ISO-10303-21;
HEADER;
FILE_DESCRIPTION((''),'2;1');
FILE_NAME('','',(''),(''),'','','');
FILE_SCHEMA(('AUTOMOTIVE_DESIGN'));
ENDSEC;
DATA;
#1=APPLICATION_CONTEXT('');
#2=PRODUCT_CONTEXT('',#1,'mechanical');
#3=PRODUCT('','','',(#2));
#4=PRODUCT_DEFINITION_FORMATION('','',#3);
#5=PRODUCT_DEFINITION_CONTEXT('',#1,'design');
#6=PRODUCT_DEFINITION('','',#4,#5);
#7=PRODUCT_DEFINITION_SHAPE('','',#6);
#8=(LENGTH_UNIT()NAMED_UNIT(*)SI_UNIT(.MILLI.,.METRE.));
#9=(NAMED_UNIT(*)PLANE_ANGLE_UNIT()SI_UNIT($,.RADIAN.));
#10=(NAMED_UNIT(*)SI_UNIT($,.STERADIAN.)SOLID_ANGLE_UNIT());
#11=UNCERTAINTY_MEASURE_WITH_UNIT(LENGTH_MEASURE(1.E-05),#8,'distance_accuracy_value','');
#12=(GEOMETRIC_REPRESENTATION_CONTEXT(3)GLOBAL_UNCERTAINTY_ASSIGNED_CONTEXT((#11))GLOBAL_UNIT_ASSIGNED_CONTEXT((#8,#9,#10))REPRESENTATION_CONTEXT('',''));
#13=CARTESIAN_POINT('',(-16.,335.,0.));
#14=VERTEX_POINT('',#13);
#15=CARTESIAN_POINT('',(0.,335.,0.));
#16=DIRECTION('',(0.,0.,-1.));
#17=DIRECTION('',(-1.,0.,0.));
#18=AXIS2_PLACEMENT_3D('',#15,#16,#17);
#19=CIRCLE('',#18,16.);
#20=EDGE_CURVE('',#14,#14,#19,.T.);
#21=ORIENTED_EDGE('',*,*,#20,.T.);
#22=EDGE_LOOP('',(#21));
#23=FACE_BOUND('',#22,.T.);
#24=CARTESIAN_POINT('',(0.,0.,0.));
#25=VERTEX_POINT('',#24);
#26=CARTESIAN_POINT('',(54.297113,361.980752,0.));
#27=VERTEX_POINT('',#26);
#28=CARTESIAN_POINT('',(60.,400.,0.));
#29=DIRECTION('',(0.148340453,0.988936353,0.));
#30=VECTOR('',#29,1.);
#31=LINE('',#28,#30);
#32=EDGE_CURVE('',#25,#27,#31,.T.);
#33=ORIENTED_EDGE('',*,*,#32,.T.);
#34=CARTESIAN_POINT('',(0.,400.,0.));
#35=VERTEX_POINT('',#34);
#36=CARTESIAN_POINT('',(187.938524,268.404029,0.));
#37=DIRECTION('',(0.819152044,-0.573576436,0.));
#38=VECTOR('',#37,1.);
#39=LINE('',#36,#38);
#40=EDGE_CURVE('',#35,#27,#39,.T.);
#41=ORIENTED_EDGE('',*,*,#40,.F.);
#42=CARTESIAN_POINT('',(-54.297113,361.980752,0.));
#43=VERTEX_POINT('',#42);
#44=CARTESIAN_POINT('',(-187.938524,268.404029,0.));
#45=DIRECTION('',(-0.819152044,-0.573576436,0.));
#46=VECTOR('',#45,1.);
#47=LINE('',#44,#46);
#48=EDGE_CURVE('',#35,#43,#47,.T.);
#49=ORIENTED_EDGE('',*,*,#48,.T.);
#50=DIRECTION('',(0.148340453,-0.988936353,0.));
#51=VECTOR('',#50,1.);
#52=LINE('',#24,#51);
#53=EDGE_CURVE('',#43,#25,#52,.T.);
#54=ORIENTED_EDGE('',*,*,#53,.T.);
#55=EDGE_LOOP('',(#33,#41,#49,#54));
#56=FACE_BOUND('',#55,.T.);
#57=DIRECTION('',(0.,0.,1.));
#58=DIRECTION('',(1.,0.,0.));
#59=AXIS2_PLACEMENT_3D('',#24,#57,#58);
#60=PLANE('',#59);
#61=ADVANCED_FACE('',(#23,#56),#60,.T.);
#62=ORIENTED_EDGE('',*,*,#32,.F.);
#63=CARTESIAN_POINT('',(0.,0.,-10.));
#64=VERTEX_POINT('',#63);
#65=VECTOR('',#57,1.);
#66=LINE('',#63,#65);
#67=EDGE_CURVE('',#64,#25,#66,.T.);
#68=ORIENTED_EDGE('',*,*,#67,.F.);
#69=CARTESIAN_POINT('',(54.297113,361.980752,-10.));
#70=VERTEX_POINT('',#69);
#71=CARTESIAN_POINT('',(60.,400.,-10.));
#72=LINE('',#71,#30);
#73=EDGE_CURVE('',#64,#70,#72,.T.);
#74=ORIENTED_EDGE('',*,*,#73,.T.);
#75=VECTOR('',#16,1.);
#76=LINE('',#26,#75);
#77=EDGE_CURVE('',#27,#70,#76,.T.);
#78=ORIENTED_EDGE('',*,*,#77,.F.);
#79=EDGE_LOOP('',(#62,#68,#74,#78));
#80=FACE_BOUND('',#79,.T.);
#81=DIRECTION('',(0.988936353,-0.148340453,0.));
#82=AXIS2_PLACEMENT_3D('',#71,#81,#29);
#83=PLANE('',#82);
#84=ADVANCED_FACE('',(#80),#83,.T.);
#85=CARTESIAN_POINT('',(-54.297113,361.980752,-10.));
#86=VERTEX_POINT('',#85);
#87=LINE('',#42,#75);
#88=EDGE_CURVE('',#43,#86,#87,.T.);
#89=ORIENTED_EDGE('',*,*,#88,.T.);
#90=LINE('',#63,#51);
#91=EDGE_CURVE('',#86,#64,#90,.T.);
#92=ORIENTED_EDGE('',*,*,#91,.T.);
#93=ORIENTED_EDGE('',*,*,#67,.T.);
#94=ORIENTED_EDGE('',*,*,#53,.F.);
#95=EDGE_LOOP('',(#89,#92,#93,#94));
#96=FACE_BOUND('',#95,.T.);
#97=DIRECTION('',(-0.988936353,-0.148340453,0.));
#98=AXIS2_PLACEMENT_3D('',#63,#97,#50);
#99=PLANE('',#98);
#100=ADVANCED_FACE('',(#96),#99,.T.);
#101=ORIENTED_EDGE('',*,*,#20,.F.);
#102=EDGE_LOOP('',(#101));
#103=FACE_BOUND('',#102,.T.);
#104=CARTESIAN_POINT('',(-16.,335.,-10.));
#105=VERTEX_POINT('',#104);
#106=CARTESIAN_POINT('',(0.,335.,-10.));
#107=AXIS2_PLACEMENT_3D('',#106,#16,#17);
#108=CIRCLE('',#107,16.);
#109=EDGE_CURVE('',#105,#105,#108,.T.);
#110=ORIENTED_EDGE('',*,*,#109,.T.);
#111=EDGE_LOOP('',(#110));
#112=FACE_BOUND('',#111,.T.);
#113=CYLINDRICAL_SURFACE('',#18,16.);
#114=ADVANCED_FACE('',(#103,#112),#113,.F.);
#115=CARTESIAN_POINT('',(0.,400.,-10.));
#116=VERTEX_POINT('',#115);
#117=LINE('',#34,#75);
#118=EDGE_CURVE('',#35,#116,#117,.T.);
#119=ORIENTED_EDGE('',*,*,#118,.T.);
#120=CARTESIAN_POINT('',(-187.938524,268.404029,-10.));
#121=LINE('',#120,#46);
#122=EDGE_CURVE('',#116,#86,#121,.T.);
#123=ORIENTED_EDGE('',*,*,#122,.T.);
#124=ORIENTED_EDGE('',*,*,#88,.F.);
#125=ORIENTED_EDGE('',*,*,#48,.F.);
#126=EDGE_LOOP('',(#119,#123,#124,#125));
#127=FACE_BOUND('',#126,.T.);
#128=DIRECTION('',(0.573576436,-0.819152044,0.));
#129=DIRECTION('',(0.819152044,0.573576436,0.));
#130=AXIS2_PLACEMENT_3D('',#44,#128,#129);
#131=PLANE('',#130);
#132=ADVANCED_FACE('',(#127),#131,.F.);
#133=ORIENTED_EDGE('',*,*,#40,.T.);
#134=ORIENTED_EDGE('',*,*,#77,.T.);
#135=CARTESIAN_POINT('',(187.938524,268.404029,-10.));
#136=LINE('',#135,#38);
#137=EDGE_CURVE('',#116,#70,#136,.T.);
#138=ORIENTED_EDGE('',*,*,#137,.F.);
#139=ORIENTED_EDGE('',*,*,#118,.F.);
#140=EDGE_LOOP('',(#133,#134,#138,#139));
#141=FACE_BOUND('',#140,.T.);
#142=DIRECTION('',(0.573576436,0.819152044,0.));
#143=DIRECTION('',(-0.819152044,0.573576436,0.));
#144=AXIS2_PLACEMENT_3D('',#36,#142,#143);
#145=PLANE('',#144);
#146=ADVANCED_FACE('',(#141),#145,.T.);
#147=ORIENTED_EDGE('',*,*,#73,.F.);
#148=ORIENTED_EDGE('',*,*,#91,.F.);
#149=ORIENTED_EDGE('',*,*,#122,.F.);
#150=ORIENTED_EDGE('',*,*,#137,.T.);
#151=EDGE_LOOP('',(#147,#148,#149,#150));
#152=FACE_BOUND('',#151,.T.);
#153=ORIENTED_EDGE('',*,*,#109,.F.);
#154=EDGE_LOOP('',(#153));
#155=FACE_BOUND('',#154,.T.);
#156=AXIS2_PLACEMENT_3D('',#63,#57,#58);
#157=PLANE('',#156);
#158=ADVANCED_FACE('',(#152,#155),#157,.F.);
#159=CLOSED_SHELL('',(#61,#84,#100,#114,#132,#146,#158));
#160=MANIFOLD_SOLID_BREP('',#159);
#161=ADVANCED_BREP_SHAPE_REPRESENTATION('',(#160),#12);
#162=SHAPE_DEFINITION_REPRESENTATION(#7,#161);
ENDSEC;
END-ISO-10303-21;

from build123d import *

# Parameters (mm, degrees)
T_LE_DE_BASE_PLI_E1_DEPTH = 10
ENL_V_MAT_EXTRU_1_DEPTH   = 405.598566483
ESQUISSE7_R               = 16
ENL_V_MAT_EXTRU_2_DEPTH   = 10


# Sheet-metal steps are written as plain solids
with BuildPart() as part:
    # Esquisse1 → Tôle de base pliée1 (new body)
    with BuildSketch(Plane.XY):
        Polygon((0, 0), (-60, 400), (60, 400), align=None)
    extrude(amount=-T_LE_DE_BASE_PLI_E1_DEPTH)

    # Esquisse6 → Enlèv. mat.-Extru.1 (cut, through all)
    with BuildSketch(Plane(origin=(0, 0, -10), x_dir=(-1, 0, 0), z_dir=(0, 0, -1))):
        Polygon((60, 400), (0, 400), (54.297112843, 361.980752285), align=None)
        Polygon((-54.297112843, 361.980752285), (0, 400), (-60, 400), align=None)
    extrude(amount=-ENL_V_MAT_EXTRU_1_DEPTH, mode=Mode.SUBTRACT)

    # Esquisse7 → Enlèv. mat.-Extru.2 (cut)
    with BuildSketch(Plane(origin=(0, 0, -10), x_dir=(-1, 0, 0), z_dir=(0, 0, -1))):
        with Locations((0, 335)):
            Circle(ESQUISSE7_R)
    extrude(amount=-ENL_V_MAT_EXTRU_2_DEPTH, mode=Mode.SUBTRACT)


solid = part.part
